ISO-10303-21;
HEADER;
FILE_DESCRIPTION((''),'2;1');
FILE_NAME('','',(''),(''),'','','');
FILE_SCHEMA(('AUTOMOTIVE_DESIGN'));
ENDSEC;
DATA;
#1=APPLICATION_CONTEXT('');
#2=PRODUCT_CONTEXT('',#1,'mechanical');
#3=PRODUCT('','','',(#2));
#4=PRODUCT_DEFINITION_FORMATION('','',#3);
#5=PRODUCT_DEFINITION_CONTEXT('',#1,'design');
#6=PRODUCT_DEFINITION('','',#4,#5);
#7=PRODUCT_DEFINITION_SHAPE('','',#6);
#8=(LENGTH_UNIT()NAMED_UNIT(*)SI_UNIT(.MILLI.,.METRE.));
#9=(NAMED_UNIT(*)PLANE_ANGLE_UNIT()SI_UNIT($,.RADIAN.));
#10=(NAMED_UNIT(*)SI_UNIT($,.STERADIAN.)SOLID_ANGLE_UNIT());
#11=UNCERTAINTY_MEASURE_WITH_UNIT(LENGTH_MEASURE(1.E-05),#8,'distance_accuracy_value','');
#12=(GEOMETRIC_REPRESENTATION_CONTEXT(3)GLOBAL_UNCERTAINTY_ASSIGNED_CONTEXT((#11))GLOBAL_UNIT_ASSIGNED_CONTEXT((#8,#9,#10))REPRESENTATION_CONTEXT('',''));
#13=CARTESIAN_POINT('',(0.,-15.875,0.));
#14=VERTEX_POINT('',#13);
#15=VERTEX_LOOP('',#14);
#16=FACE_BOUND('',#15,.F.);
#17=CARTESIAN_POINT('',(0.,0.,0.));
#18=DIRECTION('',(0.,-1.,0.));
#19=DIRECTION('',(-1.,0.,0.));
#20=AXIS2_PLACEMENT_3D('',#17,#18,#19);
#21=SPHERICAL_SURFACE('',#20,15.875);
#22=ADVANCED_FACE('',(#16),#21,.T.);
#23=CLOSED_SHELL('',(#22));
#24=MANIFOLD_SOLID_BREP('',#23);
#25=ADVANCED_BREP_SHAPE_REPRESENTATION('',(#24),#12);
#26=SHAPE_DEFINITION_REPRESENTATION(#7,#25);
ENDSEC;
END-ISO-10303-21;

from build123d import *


# Not quite as in the source:
# - the program builds the solid bodies; features that only make, move or delete a surface that nothing else refers to are left out


with BuildPart() as f1:
    # F0 (on Top) → F1 (revolve)
    with BuildSketch(Plane.XY):
        with BuildLine():
            Line((0, -15.875), (0, 15.875))
            ThreePointArc((0, 15.875), (-15.875, 0), (0, -15.875))
        make_face()
    revolve(axis=Axis((0, 0, 0), (0, 1, 0)))


solid = f1.part
